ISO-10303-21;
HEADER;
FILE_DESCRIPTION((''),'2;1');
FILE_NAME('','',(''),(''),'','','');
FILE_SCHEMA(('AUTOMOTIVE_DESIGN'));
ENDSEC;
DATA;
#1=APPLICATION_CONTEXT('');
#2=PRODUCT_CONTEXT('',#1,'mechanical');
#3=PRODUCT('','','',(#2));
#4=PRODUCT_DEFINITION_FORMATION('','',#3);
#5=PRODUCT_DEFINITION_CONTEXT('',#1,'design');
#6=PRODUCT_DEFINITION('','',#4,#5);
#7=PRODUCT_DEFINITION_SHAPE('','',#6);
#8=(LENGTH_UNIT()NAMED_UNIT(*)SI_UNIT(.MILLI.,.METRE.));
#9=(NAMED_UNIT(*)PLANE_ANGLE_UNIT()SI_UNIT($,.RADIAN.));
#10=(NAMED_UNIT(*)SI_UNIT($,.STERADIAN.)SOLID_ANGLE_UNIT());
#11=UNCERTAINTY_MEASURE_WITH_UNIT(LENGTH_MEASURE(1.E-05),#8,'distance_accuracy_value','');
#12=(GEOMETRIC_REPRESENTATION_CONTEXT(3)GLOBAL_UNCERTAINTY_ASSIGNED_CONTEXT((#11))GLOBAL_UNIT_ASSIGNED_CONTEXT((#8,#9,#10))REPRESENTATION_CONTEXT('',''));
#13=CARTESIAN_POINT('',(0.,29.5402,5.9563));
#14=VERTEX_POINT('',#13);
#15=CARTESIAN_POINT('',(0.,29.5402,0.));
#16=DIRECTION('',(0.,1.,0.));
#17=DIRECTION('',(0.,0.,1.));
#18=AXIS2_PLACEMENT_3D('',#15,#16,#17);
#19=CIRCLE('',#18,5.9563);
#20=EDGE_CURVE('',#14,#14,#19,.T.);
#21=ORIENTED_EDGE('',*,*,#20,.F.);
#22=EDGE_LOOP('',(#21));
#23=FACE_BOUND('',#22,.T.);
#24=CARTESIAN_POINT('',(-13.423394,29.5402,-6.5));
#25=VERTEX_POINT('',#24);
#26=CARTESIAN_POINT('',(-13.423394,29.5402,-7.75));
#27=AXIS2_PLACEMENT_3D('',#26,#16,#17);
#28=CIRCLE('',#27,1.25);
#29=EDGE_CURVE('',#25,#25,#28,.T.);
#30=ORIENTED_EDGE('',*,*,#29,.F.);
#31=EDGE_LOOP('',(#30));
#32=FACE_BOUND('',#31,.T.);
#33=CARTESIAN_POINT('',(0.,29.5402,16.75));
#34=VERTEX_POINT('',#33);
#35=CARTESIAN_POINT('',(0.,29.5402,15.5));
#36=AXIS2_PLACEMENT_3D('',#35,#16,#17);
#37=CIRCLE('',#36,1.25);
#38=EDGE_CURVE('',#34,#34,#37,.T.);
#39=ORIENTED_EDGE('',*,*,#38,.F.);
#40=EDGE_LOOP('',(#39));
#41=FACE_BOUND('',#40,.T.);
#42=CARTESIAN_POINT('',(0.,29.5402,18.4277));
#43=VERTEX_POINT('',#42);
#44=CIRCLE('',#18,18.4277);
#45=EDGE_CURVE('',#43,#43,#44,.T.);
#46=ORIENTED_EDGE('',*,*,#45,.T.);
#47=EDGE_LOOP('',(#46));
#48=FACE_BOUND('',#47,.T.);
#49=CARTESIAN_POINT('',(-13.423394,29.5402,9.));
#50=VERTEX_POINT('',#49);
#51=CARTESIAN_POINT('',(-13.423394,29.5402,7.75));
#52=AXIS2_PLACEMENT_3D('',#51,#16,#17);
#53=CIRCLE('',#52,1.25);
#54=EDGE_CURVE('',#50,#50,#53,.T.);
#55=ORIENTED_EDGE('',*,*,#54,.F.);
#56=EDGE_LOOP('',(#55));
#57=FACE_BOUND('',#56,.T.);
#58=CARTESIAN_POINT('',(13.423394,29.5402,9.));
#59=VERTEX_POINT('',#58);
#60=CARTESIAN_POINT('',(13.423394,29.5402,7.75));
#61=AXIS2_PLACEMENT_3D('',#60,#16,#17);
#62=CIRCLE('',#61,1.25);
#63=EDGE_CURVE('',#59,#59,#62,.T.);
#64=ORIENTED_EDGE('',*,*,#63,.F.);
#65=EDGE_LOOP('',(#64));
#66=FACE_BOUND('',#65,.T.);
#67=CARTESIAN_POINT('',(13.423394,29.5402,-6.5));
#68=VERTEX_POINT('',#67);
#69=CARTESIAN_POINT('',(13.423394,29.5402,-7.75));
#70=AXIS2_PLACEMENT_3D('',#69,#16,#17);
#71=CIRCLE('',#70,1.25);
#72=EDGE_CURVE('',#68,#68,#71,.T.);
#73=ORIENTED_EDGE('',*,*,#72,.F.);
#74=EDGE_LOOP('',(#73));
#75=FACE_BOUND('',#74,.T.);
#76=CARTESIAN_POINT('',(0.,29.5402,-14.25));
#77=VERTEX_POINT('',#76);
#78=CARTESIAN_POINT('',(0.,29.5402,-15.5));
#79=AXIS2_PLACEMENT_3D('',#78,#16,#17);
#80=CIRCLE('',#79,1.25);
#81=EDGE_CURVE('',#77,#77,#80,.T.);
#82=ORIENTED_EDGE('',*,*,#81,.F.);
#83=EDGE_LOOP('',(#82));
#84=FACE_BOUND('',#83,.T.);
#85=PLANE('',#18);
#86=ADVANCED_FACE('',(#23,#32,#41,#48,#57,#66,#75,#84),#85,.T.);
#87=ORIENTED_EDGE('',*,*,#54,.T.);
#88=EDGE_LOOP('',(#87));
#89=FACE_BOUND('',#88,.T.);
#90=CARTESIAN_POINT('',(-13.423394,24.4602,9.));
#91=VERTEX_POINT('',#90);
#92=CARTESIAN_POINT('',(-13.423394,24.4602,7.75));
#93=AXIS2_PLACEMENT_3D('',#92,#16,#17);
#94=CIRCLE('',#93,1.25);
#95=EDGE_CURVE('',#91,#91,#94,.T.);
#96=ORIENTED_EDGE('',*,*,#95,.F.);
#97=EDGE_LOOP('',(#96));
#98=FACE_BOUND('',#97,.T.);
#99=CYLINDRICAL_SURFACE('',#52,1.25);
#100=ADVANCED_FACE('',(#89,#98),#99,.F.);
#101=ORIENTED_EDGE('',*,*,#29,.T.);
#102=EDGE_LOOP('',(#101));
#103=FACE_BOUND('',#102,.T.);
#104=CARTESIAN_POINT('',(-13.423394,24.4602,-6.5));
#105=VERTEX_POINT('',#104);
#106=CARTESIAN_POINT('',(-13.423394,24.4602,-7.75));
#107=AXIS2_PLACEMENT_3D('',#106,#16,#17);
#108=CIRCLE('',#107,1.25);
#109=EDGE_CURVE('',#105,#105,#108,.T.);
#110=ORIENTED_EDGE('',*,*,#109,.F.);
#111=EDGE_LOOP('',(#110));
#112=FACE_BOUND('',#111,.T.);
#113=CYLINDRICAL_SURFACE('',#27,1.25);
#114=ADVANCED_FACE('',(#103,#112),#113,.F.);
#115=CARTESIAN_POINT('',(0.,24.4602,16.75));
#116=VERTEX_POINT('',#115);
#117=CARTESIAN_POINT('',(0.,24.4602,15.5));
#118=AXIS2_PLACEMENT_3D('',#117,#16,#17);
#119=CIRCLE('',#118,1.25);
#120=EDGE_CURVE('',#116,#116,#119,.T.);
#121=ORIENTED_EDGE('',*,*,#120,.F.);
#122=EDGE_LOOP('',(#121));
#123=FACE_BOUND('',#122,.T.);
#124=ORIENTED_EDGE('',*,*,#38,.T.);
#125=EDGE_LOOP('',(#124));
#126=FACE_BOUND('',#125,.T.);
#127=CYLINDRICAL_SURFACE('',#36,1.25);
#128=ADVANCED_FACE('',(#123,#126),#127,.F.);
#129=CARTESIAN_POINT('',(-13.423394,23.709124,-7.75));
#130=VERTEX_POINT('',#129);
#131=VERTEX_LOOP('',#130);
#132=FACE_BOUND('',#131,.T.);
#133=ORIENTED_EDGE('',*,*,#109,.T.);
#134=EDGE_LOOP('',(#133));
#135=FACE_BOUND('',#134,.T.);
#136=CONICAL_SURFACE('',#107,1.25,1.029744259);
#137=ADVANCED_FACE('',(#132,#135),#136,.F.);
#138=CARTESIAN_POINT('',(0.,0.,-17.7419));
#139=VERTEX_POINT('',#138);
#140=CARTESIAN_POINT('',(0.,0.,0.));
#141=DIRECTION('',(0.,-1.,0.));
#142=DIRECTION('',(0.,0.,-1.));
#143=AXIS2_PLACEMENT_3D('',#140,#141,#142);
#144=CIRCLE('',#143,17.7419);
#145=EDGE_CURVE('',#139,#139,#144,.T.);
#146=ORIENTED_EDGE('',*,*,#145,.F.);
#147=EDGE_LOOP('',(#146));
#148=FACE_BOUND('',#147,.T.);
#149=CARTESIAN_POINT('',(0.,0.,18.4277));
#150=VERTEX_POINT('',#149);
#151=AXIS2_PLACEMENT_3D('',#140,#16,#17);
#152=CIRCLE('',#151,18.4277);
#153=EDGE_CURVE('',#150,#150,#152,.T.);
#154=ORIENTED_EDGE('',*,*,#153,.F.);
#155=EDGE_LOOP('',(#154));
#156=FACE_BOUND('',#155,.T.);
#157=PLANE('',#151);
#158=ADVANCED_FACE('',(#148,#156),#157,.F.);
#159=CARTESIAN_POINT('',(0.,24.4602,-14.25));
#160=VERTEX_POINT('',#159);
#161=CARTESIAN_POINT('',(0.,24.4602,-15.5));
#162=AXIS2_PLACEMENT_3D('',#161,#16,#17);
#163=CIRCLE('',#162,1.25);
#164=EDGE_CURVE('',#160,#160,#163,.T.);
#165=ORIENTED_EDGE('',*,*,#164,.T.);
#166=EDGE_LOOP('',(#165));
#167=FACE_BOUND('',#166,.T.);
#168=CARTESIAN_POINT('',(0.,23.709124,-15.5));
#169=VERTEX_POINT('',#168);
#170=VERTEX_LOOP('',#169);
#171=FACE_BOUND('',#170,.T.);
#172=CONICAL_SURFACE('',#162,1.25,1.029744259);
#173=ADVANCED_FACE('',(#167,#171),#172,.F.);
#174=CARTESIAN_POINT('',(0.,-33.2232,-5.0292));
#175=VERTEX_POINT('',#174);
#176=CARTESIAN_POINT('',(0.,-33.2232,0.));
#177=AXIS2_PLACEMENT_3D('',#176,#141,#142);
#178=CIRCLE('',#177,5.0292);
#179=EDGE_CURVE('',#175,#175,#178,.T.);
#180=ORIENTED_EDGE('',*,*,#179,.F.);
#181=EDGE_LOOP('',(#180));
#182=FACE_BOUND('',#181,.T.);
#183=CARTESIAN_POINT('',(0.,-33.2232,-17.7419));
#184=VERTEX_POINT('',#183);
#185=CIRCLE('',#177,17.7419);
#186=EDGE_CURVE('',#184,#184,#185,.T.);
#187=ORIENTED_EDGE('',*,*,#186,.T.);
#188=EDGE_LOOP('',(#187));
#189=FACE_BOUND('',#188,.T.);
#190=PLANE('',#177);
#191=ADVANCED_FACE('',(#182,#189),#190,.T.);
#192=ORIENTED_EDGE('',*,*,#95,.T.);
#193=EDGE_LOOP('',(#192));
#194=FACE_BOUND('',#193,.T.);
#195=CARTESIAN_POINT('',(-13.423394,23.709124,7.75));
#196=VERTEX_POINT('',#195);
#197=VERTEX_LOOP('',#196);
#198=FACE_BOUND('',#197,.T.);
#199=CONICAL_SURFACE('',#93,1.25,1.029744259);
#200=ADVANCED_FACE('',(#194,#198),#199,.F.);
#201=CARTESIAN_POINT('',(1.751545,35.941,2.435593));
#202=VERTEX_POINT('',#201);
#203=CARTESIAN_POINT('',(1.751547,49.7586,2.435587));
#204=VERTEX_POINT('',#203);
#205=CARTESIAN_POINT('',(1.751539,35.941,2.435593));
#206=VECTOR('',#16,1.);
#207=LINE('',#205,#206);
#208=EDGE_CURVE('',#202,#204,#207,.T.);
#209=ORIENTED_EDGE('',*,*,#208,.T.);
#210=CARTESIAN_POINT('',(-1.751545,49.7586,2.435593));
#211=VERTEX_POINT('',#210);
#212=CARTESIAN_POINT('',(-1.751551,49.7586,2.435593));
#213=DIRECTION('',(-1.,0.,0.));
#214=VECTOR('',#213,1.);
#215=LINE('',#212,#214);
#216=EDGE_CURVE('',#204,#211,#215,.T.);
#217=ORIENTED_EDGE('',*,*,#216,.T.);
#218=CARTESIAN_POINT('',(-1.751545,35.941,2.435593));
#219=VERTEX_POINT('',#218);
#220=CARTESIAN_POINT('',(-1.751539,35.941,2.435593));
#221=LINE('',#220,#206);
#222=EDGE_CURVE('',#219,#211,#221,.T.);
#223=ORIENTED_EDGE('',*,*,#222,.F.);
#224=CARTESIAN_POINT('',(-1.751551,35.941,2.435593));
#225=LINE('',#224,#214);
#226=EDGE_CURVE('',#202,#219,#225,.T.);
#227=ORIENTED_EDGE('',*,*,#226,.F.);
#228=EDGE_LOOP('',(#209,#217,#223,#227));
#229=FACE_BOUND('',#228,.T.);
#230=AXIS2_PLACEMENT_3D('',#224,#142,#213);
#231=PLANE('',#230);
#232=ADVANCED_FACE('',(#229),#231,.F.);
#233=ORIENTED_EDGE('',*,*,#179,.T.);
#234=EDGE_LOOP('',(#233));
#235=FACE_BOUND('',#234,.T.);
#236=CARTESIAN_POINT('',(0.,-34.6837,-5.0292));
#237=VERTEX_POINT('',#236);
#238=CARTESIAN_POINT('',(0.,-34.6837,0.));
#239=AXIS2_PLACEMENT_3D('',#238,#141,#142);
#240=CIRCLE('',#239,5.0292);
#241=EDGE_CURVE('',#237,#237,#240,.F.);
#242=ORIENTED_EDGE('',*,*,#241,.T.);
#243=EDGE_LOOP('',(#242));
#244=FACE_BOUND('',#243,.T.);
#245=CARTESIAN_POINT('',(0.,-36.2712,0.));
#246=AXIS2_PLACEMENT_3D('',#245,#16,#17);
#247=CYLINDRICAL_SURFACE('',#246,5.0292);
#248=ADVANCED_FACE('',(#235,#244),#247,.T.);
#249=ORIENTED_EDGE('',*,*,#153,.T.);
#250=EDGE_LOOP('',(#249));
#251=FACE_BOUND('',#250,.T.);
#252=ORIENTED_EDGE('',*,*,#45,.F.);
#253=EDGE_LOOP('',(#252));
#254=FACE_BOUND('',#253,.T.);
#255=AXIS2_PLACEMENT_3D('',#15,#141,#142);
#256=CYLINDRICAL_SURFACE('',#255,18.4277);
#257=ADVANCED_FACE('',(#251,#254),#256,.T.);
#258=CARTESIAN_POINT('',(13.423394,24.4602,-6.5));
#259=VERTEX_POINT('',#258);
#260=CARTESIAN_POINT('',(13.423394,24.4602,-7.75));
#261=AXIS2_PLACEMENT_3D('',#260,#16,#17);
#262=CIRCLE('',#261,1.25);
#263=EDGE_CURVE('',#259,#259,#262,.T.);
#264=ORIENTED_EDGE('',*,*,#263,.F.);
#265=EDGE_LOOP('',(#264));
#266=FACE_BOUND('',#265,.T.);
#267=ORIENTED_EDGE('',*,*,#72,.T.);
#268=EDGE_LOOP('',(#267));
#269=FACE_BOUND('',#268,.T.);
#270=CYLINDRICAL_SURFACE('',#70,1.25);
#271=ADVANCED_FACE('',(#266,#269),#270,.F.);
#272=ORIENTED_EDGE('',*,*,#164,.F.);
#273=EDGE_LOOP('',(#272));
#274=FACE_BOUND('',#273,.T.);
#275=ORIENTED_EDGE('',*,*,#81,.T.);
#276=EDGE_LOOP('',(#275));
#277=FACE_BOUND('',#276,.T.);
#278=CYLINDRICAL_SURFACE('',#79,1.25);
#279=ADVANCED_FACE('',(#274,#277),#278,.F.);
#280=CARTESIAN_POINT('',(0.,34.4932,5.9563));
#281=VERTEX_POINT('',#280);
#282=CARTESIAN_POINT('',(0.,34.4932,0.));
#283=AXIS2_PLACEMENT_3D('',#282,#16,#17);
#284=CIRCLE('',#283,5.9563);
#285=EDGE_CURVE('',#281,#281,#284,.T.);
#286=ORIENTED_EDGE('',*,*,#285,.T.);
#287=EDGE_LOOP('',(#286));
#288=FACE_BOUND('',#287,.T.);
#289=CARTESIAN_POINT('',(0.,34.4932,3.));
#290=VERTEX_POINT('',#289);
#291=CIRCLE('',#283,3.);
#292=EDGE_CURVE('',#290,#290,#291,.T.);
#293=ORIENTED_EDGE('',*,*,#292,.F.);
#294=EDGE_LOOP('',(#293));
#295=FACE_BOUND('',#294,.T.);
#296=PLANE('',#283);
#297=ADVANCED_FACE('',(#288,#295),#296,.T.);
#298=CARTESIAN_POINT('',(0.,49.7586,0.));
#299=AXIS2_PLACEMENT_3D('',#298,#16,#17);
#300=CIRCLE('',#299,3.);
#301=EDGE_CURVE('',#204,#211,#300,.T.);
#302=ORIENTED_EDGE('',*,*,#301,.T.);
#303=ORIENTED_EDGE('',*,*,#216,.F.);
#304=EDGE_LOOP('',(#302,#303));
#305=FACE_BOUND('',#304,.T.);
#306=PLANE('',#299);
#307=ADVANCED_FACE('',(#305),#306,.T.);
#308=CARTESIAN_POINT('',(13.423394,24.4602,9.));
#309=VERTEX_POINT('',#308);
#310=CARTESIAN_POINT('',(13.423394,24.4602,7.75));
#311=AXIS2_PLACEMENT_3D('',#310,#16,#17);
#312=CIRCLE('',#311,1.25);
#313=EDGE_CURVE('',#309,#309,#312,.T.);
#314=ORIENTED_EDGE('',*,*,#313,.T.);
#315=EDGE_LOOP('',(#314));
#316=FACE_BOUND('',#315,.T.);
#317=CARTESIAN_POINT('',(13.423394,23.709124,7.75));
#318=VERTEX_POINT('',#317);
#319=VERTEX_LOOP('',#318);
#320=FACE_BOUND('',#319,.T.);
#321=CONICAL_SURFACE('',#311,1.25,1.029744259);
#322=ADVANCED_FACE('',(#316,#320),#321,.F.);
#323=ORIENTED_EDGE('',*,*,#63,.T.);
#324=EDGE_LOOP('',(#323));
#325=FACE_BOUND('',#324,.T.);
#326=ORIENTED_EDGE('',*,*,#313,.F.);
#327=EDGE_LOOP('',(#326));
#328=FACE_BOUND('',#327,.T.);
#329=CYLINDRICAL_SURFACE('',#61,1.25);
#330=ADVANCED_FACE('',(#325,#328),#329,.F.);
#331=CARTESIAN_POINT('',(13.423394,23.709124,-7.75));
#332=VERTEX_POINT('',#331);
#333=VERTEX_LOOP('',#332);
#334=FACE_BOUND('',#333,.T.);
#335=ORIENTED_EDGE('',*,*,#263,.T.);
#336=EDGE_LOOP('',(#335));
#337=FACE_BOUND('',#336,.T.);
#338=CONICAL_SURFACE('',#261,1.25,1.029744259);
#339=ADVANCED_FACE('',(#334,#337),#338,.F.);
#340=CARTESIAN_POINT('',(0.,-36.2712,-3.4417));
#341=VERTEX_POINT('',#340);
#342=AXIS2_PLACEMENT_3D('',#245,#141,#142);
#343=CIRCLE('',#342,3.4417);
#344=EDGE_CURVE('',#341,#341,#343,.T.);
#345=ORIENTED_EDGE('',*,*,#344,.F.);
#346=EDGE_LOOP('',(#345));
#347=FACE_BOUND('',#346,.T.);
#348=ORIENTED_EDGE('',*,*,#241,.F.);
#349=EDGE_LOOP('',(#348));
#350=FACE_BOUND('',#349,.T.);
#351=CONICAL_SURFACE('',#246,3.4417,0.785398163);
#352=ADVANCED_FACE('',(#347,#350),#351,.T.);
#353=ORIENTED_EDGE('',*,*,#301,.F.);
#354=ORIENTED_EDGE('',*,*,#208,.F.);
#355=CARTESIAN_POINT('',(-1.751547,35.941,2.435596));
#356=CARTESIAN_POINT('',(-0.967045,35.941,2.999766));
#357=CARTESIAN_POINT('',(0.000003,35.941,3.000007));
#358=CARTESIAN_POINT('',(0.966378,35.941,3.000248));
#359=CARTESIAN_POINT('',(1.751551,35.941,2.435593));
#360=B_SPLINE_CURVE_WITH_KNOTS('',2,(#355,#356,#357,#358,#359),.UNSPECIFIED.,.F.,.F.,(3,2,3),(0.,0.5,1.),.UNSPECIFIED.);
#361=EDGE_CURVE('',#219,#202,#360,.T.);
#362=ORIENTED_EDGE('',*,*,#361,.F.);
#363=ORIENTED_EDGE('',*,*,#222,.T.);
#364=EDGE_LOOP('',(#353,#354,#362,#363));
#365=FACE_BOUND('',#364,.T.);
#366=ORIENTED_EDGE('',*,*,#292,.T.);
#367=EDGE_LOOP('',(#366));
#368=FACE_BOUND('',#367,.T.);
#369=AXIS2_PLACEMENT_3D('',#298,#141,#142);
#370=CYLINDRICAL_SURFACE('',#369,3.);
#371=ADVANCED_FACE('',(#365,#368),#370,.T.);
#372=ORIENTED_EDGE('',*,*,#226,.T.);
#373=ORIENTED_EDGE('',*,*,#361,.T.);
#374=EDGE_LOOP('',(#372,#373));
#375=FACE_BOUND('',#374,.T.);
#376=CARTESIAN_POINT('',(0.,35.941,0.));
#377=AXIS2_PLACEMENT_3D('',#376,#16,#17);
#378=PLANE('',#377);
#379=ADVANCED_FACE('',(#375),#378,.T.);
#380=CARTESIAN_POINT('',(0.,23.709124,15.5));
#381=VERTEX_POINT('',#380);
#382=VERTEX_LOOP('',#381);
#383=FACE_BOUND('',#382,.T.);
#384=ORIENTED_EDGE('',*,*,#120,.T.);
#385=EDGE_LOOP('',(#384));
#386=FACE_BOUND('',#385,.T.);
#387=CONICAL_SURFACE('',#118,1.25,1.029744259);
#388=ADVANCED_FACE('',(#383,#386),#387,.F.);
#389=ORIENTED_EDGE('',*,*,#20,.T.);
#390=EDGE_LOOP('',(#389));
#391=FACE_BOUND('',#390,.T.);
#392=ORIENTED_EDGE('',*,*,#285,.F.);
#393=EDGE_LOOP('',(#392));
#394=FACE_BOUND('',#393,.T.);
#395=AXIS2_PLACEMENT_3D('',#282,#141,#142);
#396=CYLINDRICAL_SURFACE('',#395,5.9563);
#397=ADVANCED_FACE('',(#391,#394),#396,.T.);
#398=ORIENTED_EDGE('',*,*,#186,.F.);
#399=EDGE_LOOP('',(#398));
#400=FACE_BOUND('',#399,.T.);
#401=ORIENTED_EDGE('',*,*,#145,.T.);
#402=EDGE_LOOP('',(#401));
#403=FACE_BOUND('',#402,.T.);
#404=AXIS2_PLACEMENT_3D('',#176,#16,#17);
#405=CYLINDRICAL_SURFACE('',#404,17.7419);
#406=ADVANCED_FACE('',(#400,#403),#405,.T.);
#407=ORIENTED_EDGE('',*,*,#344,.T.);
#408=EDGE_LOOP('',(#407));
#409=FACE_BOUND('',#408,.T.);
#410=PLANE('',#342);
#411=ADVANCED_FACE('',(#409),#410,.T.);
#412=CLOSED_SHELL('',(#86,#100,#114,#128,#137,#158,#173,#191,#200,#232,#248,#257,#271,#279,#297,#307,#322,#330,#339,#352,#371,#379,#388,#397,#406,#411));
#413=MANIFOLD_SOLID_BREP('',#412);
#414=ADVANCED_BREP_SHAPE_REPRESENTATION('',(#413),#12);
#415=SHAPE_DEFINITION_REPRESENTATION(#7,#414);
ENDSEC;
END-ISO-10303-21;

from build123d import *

# Parameters (mm, degrees)
SKETCH1_R                       = 18.4277
BOSS_EXTRUDE1_DEPTH             = 29.5402
SKETCH2_R                       = 5.9563
BOSS_EXTRUDE2_DEPTH             = 4.953
SKETCH3_R                       = 3
BOSS_EXTRUDE3_DEPTH             = 15.2654
CUT_EXTRUDE1_DEPTH              = 13.8176
SKETCH5_R                       = 17.7419
BOSS_EXTRUDE4_DEPTH             = 33.2232
SKETCH6_R                       = 5.0292
BOSS_EXTRUDE5_DEPTH             = 3.048
CHAMFER1_SIZE                   = 1.5875
TAP_DRILL_FOR_M3X0_5_TAP1_D     = 2.5
TAP_DRILL_FOR_M3X0_5_TAP1_DEPTH = 5.08
TAP_DRILL_FOR_M3X0_5_TAP1_TIP   = 0.751075774


with BuildPart() as part:
    # Sketch1 → Boss-Extrude1 (new body)
    with BuildSketch(Plane(origin=(0, 0, 0), x_dir=(1, 0, 0), z_dir=(0, 1, 0))):
        with Locations(Location((0, 0, 0), (0, 0, 270))):
            Circle(SKETCH1_R)
    extrude(amount=BOSS_EXTRUDE1_DEPTH)

    # Sketch2 → Boss-Extrude2 (add)
    with BuildSketch(Plane(origin=(0, 29.5402, 0), x_dir=(1, 0, 0), z_dir=(0, 1, 0))):
        with Locations(Location((0, 0, 0), (0, 0, 270))):
            Circle(SKETCH2_R)
    extrude(amount=BOSS_EXTRUDE2_DEPTH)

    # Sketch3 → Boss-Extrude3 (add)
    with BuildSketch(Plane(origin=(0, 34.4932, 0), x_dir=(1, 0, 0), z_dir=(0, 1, 0))):
        with Locations(Location((0, 0, 0), (0, 0, 270))):
            Circle(SKETCH3_R)
    extrude(amount=BOSS_EXTRUDE3_DEPTH)

    # Sketch4 → Cut-Extrude1 (cut)
    with BuildSketch(Plane(origin=(0, 49.7586, 0), x_dir=(1, 0, 0), z_dir=(0, 1, 0))):
        with BuildLine():
            Line((-1.75155103, -2.435592791), (1.75155103, -2.435592791))
            ThreePointArc((1.75155103, -2.435592791), (0, -3.000007209), (-1.75155103, -2.435592791))
        make_face()
    extrude(amount=-CUT_EXTRUDE1_DEPTH, mode=Mode.SUBTRACT)

    # Sketch5 → Boss-Extrude4 (add)
    with BuildSketch(Plane.XZ):
        with Locations(Location((0, 0, 0), (0, 0, 270))):
            Circle(SKETCH5_R)
    extrude(amount=BOSS_EXTRUDE4_DEPTH)

    # Sketch6 → Boss-Extrude5 (add)
    with BuildSketch(Plane(origin=(0, -33.2232, 0), x_dir=(-1, 0, 0), z_dir=(0, -1, 0))):
        with Locations(Location((0, 0, 0), (0, 0, 90))):
            Circle(SKETCH6_R)
    extrude(amount=BOSS_EXTRUDE5_DEPTH)

    # Chamfer1
    chamfer1_edges = [part.edges().sort_by_distance(p)[0] for p in [
        (0, -36.2712, 5.0292),
    ]]
    chamfer(chamfer1_edges, length=CHAMFER1_SIZE)

    # Tap Drill for M3x0.5 Tap1
    with Locations(Plane(origin=(0, 29.5402, 0), x_dir=(1, 0, 0), z_dir=(0, 1, 0))):
        with Locations((0, 15.5), (13.423393759, 7.75), (13.423393759, -7.75), (0, -15.5), (-13.423393759, -7.75), (-13.423393759, 7.75)):
            Hole(TAP_DRILL_FOR_M3X0_5_TAP1_D / 2, depth=TAP_DRILL_FOR_M3X0_5_TAP1_DEPTH)
            with Locations((0, 0, -(TAP_DRILL_FOR_M3X0_5_TAP1_DEPTH + TAP_DRILL_FOR_M3X0_5_TAP1_TIP / 2))):  # 118° drill point
                Cone(0, TAP_DRILL_FOR_M3X0_5_TAP1_D / 2, TAP_DRILL_FOR_M3X0_5_TAP1_TIP, mode=Mode.SUBTRACT)


solid = part.part
